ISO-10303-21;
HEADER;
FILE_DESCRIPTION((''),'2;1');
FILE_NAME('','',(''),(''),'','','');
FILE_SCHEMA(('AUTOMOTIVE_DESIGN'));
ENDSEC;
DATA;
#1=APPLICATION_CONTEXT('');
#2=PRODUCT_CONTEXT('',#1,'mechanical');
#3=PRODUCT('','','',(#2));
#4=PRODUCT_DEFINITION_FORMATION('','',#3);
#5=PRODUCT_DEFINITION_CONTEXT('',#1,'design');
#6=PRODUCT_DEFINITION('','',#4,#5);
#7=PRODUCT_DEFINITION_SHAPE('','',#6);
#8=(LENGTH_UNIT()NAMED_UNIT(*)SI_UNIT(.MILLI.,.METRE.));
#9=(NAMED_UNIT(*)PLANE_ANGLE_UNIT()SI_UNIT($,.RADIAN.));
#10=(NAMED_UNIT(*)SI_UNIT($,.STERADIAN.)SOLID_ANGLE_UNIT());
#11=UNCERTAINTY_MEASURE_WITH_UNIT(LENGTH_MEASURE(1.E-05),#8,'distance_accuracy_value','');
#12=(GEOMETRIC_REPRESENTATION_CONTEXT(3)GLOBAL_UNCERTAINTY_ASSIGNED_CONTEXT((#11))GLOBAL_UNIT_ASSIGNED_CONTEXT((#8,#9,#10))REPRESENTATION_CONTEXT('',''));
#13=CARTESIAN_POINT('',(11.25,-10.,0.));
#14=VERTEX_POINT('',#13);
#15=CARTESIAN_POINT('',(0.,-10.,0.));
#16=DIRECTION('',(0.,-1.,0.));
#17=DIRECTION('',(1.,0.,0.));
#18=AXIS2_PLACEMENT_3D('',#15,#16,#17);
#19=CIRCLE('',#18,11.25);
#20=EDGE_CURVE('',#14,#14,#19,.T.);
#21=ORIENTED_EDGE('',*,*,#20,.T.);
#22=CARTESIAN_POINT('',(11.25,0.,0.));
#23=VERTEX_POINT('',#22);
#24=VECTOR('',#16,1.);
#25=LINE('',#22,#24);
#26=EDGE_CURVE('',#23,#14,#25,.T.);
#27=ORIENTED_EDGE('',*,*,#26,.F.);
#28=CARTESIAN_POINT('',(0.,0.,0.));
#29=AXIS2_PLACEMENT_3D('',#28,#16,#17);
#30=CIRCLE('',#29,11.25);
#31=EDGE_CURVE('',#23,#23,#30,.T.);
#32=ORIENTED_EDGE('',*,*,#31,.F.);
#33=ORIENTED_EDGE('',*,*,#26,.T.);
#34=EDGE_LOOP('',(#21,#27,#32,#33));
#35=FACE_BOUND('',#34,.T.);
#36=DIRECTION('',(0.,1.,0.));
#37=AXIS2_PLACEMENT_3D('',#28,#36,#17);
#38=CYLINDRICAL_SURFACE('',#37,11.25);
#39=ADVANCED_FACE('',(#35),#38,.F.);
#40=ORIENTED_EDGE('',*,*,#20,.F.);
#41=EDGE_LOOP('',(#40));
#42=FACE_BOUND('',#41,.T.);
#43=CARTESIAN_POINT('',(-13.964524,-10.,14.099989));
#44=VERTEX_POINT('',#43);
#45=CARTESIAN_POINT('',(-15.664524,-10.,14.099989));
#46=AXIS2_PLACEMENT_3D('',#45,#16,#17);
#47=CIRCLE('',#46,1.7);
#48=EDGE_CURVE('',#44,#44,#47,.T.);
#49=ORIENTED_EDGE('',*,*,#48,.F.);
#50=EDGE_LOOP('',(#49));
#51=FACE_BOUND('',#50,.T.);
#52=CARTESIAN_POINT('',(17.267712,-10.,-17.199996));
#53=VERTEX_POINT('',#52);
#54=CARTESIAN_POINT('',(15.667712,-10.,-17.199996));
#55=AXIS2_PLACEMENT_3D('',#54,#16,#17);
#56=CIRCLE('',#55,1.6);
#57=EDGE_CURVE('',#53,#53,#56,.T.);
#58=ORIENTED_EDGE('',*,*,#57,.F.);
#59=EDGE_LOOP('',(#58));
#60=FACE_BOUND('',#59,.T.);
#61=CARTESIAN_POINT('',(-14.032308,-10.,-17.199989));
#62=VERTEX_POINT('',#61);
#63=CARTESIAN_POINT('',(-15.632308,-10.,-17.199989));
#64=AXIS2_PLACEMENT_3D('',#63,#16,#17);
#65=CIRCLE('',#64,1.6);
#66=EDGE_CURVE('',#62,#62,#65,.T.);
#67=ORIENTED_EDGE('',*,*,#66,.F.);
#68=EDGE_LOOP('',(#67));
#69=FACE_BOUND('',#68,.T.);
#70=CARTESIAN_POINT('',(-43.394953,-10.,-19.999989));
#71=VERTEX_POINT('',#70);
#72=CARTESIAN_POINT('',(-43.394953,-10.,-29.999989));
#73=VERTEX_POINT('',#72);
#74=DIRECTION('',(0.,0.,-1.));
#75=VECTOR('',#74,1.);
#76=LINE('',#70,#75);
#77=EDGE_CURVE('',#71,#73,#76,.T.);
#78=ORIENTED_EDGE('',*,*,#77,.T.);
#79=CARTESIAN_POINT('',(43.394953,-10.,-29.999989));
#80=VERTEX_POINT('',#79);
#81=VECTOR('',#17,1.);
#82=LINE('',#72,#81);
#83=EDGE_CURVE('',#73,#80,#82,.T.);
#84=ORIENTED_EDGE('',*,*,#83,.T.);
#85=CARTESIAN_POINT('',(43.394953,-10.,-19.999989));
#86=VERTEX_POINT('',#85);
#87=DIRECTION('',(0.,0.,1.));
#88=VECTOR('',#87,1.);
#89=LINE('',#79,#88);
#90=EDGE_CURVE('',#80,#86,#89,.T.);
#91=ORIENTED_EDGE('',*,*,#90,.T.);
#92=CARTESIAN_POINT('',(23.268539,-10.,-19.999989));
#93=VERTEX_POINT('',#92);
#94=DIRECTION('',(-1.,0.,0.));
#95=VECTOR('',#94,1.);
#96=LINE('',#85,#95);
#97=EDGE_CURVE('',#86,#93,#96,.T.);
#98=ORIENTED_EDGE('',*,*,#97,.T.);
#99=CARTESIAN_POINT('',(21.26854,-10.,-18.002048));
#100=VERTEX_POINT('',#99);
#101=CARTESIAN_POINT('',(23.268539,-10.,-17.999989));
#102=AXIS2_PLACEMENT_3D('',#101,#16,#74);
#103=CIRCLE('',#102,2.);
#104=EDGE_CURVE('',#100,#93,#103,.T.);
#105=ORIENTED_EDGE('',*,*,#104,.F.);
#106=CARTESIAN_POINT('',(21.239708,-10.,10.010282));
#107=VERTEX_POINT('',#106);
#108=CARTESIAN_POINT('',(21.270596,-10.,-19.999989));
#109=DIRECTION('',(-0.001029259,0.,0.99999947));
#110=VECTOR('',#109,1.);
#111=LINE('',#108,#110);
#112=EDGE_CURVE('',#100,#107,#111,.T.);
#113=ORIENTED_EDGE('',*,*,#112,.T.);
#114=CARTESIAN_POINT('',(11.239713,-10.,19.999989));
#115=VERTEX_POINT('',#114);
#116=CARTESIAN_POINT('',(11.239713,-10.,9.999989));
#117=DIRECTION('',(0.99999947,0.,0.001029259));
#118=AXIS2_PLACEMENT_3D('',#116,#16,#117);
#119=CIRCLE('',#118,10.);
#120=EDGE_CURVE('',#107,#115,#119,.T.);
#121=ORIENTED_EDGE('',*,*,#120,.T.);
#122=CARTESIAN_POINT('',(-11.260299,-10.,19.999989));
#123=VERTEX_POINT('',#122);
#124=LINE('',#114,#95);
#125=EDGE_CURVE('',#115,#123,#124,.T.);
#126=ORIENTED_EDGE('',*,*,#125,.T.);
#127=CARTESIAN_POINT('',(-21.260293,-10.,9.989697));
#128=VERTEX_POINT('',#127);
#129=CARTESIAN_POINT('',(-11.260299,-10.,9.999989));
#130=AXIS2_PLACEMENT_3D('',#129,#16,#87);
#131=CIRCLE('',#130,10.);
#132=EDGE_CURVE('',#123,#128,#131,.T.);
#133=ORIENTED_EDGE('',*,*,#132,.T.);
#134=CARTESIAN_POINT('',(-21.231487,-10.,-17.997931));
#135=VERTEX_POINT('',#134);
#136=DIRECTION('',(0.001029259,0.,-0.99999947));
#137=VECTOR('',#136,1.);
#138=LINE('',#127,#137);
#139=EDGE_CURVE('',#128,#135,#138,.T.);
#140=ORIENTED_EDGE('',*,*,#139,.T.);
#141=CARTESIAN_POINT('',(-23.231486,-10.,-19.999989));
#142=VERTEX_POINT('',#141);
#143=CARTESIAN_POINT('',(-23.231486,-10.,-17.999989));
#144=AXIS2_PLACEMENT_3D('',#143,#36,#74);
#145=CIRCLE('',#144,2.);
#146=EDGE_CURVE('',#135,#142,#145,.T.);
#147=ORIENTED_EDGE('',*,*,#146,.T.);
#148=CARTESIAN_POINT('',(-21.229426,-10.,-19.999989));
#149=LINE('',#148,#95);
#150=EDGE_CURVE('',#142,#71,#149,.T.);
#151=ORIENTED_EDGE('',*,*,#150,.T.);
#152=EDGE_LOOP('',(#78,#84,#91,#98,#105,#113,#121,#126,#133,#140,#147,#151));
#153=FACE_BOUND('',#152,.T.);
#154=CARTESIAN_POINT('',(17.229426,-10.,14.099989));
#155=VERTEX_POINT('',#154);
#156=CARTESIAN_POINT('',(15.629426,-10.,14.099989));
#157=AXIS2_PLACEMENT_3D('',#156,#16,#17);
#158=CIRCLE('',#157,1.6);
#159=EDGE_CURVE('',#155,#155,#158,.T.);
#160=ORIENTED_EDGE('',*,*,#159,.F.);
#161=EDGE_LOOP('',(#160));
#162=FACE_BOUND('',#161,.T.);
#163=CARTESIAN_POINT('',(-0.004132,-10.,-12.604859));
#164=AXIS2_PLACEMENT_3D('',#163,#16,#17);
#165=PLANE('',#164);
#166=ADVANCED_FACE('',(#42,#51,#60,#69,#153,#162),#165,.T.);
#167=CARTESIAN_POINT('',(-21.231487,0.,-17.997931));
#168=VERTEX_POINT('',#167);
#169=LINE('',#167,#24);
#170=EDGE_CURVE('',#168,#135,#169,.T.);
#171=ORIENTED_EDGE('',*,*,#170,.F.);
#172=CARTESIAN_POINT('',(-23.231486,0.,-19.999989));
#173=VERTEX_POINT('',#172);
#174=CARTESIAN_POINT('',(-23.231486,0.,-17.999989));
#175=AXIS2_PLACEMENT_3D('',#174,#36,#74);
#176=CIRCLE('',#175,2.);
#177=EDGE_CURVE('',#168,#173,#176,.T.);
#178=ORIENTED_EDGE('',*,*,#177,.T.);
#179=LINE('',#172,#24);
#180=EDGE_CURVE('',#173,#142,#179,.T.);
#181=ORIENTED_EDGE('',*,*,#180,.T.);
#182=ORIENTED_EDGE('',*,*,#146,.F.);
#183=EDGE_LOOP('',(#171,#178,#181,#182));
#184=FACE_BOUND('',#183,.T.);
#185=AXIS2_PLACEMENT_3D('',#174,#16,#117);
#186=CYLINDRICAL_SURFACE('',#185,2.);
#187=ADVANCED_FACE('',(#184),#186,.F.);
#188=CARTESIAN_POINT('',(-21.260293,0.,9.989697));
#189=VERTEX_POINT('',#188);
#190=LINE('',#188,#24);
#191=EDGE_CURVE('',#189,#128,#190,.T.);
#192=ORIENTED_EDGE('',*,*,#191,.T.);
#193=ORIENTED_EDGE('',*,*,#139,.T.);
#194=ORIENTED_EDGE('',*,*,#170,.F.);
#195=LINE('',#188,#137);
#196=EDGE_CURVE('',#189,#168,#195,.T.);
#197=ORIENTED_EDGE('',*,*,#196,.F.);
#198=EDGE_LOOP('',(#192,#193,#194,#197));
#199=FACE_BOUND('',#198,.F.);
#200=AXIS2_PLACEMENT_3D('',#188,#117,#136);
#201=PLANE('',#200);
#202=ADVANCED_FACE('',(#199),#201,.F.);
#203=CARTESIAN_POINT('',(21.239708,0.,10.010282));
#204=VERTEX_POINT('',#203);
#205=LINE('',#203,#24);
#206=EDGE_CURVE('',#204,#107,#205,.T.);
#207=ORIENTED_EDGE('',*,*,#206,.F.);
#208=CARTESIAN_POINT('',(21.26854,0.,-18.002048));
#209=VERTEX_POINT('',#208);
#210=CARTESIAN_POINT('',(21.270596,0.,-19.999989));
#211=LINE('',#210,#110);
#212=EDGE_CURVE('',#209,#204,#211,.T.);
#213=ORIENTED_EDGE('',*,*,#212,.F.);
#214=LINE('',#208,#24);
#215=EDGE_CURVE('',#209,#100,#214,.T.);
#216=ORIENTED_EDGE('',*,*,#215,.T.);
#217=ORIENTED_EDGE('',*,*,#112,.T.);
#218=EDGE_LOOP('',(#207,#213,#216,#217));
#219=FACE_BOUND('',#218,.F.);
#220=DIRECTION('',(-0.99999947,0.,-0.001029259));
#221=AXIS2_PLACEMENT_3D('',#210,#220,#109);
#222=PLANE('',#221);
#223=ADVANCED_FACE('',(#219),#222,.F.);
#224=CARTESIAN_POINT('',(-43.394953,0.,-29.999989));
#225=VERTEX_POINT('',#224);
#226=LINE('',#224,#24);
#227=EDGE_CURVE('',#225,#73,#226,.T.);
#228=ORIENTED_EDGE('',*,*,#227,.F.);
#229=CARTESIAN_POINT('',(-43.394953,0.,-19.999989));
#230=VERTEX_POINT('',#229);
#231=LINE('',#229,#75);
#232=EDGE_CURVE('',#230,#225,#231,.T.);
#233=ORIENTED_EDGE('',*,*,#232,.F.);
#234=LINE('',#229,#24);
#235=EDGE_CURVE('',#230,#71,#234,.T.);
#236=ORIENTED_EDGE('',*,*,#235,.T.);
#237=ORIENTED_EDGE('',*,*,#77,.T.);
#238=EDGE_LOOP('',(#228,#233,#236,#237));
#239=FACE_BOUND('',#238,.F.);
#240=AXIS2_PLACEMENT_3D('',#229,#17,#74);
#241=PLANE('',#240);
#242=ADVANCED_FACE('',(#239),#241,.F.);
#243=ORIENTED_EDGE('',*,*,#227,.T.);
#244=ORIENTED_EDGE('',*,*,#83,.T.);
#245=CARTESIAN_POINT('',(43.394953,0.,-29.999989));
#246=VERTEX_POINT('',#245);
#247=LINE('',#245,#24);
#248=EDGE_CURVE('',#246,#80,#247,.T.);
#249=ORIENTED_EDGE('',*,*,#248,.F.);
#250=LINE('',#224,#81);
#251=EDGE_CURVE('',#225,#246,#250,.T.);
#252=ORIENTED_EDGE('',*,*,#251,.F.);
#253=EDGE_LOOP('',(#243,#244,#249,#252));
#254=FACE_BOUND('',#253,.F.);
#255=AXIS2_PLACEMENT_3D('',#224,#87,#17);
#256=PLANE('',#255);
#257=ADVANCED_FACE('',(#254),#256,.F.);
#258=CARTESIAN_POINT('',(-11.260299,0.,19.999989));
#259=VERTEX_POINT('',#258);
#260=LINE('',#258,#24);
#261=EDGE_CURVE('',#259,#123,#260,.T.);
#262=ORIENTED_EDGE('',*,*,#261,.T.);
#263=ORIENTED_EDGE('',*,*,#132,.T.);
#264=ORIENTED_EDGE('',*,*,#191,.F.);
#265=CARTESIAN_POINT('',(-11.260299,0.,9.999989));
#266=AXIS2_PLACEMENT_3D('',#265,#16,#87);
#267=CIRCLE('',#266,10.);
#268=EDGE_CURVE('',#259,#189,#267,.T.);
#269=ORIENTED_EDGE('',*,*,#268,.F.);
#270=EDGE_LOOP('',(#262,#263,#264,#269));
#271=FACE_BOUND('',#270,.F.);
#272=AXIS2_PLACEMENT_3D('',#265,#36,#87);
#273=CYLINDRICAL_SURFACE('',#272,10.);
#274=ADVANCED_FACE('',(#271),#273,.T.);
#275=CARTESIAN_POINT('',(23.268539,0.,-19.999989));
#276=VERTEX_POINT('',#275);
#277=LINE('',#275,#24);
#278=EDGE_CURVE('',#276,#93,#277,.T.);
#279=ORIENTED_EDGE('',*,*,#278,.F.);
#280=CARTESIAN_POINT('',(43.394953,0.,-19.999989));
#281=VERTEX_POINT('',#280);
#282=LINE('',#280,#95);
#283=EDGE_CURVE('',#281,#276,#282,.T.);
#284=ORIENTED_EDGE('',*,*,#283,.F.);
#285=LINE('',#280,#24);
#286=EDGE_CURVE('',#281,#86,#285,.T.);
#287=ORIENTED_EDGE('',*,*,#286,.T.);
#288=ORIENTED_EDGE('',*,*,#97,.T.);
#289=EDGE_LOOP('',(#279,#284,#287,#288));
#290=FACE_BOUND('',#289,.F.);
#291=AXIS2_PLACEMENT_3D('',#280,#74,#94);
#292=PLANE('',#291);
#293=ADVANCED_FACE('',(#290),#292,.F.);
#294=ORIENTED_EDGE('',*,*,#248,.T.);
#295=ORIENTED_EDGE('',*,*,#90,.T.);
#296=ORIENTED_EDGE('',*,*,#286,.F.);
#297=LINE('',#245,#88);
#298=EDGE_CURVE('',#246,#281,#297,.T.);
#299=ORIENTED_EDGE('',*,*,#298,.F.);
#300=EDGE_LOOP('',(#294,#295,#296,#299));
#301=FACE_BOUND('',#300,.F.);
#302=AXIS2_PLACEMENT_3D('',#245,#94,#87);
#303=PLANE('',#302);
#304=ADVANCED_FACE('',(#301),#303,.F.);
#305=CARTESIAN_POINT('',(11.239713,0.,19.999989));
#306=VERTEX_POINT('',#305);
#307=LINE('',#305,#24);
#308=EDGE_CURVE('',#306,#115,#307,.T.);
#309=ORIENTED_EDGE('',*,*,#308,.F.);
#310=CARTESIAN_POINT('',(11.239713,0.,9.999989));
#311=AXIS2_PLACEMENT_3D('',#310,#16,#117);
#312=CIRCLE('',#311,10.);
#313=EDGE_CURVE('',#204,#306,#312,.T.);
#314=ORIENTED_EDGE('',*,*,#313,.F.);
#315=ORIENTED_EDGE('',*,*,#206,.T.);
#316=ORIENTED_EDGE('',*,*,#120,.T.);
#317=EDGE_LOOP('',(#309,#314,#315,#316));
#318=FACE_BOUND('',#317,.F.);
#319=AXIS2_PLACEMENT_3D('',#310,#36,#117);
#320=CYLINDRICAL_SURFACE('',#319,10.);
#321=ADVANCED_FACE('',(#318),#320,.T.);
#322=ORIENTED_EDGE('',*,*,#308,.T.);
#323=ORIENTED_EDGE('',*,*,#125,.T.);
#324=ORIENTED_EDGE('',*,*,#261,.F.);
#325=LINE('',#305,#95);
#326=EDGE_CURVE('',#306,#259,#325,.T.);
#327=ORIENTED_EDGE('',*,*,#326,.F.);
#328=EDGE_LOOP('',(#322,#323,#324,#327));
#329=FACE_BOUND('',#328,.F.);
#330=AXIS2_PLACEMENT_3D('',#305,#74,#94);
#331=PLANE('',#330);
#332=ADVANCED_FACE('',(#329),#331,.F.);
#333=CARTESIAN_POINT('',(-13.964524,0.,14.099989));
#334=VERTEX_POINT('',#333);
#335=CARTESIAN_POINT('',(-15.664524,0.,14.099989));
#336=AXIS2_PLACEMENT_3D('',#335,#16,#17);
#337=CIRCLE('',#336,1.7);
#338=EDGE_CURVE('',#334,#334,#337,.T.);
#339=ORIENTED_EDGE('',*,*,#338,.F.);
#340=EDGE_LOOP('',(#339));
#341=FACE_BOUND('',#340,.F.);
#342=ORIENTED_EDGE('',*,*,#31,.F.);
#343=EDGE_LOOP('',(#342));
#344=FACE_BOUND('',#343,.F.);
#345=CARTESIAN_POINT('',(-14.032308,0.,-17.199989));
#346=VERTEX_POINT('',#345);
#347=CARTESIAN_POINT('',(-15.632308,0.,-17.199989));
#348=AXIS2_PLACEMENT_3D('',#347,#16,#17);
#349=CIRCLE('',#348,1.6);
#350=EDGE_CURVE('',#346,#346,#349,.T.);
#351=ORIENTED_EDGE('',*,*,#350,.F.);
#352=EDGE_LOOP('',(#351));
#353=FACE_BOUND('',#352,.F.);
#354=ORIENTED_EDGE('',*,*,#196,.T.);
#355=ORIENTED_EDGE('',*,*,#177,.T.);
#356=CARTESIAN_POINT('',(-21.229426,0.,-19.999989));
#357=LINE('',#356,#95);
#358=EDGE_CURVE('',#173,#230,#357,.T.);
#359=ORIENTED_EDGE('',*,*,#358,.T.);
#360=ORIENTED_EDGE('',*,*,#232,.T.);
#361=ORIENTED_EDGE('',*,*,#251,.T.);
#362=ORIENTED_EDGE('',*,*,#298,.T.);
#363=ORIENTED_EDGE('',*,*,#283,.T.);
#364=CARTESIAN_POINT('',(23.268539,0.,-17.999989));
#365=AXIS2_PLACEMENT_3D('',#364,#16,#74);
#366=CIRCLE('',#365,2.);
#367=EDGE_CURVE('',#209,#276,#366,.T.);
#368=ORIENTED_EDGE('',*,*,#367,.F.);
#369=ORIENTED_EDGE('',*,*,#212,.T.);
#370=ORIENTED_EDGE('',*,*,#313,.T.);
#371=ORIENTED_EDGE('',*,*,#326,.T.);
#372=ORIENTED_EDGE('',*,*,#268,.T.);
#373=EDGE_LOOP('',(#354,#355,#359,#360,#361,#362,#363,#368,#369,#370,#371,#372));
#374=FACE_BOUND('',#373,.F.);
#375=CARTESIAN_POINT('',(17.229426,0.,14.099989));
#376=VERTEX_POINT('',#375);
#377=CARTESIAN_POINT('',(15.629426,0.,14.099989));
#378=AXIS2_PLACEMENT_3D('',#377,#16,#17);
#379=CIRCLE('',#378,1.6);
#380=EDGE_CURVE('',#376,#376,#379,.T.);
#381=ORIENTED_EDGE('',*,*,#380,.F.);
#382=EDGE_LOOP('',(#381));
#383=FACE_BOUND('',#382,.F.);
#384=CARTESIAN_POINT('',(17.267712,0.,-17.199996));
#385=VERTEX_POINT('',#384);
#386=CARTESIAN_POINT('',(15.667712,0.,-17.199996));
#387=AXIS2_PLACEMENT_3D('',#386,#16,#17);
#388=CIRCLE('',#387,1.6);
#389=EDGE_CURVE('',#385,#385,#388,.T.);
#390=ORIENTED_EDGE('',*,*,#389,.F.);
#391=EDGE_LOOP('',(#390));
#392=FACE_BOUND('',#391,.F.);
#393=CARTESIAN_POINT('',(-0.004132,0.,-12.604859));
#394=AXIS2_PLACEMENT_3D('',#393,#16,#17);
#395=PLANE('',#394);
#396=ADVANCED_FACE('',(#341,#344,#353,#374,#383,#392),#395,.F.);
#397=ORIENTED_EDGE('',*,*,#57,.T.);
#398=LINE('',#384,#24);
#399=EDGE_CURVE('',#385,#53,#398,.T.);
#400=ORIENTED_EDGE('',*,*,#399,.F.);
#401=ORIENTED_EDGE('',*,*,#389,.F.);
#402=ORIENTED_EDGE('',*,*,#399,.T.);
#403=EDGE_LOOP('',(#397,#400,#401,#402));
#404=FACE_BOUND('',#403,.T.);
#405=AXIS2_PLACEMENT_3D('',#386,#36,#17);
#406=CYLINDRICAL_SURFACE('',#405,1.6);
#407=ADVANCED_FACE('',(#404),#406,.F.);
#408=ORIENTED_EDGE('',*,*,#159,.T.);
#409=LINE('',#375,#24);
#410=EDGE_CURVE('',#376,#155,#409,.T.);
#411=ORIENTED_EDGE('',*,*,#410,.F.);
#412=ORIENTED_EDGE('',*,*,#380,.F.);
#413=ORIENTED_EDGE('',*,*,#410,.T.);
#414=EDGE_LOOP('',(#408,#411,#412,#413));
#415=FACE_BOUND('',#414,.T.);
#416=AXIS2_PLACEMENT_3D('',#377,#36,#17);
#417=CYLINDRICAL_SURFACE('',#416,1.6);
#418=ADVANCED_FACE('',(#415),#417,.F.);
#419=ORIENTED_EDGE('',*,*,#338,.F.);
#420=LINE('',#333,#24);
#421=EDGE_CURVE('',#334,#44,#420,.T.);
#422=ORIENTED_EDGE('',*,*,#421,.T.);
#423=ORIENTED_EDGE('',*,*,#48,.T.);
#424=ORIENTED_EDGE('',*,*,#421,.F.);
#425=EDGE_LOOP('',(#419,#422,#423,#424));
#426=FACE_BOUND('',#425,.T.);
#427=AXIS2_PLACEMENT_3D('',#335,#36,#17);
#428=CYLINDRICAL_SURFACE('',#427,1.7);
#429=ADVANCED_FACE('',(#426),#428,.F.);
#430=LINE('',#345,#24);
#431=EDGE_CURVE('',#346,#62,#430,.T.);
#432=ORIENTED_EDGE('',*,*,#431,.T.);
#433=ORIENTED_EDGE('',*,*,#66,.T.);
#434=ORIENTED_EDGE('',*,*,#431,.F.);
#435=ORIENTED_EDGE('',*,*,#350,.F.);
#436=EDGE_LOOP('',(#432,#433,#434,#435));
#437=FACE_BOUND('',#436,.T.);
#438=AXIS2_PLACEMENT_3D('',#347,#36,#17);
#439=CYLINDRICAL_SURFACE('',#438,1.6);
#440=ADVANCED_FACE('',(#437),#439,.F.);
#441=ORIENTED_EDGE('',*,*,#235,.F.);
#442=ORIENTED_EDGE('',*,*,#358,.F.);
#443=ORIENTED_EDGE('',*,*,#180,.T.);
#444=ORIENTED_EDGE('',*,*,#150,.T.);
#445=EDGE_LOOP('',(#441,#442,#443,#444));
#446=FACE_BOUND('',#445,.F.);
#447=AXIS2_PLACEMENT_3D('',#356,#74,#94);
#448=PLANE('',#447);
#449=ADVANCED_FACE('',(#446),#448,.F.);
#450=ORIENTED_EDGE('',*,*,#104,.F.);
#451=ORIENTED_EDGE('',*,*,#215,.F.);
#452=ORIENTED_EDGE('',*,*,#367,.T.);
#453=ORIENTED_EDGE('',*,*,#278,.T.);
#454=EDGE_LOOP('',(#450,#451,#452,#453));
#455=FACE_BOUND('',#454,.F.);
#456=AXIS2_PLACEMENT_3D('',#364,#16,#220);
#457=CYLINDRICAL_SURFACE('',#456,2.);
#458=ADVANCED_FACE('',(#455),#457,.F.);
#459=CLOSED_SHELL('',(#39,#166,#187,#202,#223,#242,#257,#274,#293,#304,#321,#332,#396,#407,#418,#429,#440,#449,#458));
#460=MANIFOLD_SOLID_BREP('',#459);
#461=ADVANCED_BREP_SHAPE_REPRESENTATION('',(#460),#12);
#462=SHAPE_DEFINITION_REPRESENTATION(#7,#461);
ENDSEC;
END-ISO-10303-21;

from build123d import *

# Parameters (mm, degrees)
F0_R     = 1.6
F0_R_2   = 1.7
F0_R_3   = 11.25
F1_DEPTH = 10
F2_R     = 2


# Not quite as in the source:
# - a feature of the source that left no trace in its solid (it failed there, or was rolled back) is left out


with BuildPart() as f1:
    # F0 (on Front) → F1 (new body)
    with BuildSketch(Plane.XZ):
        with BuildLine():
            Line((11.2397133785, 19.9999894063), (-11.2602985395, 19.9999894063))
            ThreePointArc((-11.2602985395, 19.9999894063), (-18.3350043941, 17.0674173026), (-21.2602932426, 9.9896968203))
            Line((-21.2602932426, 9.9896968203), (-21.229426084, -19.9999894063))
            Line((-21.229426084, -19.9999894063), (-43.3949531186, -19.9999894063))
            Line((-43.3949531186, -19.9999894063), (-43.3949531186, -29.9999894063))
            Line((-43.3949531186, -29.9999894063), (43.3949531186, -29.9999894063))
            Line((43.3949531186, -29.9999894063), (43.3949531186, -19.9999894063))
            Line((43.3949531186, -19.9999894063), (21.2705964277, -19.9999894063))
            Line((21.2705964277, -19.9999894063), (21.2397080816, 10.0102819922))
            ThreePointArc((21.2397080816, 10.0102819922), (18.3071412749, 17.0746952609), (11.2397133785, 19.9999894063))
        make_face()
        with Locations((-15.6323080096, -17.1999894063)):
            Circle(F0_R, mode=Mode.SUBTRACT)
        with Locations((15.6677115429, -17.1999961863)):
            Circle(F0_R, mode=Mode.SUBTRACT)
        with Locations((-15.6645237988, 14.0999894063)):
            Circle(F0_R_2, mode=Mode.SUBTRACT)
        Circle(F0_R_3, mode=Mode.SUBTRACT)
        with Locations((15.629426084, 14.0999894063)):
            Circle(F0_R, mode=Mode.SUBTRACT)
    extrude(amount=F1_DEPTH)

    # F2
    f2_edges = [f1.edges().sort_by_distance(p)[0] for p in [
        (21.270596, -5, -19.999989),
        (-21.229426, -5, -19.999989),
    ]]
    fillet(f2_edges, radius=F2_R)


solid = f1.part
